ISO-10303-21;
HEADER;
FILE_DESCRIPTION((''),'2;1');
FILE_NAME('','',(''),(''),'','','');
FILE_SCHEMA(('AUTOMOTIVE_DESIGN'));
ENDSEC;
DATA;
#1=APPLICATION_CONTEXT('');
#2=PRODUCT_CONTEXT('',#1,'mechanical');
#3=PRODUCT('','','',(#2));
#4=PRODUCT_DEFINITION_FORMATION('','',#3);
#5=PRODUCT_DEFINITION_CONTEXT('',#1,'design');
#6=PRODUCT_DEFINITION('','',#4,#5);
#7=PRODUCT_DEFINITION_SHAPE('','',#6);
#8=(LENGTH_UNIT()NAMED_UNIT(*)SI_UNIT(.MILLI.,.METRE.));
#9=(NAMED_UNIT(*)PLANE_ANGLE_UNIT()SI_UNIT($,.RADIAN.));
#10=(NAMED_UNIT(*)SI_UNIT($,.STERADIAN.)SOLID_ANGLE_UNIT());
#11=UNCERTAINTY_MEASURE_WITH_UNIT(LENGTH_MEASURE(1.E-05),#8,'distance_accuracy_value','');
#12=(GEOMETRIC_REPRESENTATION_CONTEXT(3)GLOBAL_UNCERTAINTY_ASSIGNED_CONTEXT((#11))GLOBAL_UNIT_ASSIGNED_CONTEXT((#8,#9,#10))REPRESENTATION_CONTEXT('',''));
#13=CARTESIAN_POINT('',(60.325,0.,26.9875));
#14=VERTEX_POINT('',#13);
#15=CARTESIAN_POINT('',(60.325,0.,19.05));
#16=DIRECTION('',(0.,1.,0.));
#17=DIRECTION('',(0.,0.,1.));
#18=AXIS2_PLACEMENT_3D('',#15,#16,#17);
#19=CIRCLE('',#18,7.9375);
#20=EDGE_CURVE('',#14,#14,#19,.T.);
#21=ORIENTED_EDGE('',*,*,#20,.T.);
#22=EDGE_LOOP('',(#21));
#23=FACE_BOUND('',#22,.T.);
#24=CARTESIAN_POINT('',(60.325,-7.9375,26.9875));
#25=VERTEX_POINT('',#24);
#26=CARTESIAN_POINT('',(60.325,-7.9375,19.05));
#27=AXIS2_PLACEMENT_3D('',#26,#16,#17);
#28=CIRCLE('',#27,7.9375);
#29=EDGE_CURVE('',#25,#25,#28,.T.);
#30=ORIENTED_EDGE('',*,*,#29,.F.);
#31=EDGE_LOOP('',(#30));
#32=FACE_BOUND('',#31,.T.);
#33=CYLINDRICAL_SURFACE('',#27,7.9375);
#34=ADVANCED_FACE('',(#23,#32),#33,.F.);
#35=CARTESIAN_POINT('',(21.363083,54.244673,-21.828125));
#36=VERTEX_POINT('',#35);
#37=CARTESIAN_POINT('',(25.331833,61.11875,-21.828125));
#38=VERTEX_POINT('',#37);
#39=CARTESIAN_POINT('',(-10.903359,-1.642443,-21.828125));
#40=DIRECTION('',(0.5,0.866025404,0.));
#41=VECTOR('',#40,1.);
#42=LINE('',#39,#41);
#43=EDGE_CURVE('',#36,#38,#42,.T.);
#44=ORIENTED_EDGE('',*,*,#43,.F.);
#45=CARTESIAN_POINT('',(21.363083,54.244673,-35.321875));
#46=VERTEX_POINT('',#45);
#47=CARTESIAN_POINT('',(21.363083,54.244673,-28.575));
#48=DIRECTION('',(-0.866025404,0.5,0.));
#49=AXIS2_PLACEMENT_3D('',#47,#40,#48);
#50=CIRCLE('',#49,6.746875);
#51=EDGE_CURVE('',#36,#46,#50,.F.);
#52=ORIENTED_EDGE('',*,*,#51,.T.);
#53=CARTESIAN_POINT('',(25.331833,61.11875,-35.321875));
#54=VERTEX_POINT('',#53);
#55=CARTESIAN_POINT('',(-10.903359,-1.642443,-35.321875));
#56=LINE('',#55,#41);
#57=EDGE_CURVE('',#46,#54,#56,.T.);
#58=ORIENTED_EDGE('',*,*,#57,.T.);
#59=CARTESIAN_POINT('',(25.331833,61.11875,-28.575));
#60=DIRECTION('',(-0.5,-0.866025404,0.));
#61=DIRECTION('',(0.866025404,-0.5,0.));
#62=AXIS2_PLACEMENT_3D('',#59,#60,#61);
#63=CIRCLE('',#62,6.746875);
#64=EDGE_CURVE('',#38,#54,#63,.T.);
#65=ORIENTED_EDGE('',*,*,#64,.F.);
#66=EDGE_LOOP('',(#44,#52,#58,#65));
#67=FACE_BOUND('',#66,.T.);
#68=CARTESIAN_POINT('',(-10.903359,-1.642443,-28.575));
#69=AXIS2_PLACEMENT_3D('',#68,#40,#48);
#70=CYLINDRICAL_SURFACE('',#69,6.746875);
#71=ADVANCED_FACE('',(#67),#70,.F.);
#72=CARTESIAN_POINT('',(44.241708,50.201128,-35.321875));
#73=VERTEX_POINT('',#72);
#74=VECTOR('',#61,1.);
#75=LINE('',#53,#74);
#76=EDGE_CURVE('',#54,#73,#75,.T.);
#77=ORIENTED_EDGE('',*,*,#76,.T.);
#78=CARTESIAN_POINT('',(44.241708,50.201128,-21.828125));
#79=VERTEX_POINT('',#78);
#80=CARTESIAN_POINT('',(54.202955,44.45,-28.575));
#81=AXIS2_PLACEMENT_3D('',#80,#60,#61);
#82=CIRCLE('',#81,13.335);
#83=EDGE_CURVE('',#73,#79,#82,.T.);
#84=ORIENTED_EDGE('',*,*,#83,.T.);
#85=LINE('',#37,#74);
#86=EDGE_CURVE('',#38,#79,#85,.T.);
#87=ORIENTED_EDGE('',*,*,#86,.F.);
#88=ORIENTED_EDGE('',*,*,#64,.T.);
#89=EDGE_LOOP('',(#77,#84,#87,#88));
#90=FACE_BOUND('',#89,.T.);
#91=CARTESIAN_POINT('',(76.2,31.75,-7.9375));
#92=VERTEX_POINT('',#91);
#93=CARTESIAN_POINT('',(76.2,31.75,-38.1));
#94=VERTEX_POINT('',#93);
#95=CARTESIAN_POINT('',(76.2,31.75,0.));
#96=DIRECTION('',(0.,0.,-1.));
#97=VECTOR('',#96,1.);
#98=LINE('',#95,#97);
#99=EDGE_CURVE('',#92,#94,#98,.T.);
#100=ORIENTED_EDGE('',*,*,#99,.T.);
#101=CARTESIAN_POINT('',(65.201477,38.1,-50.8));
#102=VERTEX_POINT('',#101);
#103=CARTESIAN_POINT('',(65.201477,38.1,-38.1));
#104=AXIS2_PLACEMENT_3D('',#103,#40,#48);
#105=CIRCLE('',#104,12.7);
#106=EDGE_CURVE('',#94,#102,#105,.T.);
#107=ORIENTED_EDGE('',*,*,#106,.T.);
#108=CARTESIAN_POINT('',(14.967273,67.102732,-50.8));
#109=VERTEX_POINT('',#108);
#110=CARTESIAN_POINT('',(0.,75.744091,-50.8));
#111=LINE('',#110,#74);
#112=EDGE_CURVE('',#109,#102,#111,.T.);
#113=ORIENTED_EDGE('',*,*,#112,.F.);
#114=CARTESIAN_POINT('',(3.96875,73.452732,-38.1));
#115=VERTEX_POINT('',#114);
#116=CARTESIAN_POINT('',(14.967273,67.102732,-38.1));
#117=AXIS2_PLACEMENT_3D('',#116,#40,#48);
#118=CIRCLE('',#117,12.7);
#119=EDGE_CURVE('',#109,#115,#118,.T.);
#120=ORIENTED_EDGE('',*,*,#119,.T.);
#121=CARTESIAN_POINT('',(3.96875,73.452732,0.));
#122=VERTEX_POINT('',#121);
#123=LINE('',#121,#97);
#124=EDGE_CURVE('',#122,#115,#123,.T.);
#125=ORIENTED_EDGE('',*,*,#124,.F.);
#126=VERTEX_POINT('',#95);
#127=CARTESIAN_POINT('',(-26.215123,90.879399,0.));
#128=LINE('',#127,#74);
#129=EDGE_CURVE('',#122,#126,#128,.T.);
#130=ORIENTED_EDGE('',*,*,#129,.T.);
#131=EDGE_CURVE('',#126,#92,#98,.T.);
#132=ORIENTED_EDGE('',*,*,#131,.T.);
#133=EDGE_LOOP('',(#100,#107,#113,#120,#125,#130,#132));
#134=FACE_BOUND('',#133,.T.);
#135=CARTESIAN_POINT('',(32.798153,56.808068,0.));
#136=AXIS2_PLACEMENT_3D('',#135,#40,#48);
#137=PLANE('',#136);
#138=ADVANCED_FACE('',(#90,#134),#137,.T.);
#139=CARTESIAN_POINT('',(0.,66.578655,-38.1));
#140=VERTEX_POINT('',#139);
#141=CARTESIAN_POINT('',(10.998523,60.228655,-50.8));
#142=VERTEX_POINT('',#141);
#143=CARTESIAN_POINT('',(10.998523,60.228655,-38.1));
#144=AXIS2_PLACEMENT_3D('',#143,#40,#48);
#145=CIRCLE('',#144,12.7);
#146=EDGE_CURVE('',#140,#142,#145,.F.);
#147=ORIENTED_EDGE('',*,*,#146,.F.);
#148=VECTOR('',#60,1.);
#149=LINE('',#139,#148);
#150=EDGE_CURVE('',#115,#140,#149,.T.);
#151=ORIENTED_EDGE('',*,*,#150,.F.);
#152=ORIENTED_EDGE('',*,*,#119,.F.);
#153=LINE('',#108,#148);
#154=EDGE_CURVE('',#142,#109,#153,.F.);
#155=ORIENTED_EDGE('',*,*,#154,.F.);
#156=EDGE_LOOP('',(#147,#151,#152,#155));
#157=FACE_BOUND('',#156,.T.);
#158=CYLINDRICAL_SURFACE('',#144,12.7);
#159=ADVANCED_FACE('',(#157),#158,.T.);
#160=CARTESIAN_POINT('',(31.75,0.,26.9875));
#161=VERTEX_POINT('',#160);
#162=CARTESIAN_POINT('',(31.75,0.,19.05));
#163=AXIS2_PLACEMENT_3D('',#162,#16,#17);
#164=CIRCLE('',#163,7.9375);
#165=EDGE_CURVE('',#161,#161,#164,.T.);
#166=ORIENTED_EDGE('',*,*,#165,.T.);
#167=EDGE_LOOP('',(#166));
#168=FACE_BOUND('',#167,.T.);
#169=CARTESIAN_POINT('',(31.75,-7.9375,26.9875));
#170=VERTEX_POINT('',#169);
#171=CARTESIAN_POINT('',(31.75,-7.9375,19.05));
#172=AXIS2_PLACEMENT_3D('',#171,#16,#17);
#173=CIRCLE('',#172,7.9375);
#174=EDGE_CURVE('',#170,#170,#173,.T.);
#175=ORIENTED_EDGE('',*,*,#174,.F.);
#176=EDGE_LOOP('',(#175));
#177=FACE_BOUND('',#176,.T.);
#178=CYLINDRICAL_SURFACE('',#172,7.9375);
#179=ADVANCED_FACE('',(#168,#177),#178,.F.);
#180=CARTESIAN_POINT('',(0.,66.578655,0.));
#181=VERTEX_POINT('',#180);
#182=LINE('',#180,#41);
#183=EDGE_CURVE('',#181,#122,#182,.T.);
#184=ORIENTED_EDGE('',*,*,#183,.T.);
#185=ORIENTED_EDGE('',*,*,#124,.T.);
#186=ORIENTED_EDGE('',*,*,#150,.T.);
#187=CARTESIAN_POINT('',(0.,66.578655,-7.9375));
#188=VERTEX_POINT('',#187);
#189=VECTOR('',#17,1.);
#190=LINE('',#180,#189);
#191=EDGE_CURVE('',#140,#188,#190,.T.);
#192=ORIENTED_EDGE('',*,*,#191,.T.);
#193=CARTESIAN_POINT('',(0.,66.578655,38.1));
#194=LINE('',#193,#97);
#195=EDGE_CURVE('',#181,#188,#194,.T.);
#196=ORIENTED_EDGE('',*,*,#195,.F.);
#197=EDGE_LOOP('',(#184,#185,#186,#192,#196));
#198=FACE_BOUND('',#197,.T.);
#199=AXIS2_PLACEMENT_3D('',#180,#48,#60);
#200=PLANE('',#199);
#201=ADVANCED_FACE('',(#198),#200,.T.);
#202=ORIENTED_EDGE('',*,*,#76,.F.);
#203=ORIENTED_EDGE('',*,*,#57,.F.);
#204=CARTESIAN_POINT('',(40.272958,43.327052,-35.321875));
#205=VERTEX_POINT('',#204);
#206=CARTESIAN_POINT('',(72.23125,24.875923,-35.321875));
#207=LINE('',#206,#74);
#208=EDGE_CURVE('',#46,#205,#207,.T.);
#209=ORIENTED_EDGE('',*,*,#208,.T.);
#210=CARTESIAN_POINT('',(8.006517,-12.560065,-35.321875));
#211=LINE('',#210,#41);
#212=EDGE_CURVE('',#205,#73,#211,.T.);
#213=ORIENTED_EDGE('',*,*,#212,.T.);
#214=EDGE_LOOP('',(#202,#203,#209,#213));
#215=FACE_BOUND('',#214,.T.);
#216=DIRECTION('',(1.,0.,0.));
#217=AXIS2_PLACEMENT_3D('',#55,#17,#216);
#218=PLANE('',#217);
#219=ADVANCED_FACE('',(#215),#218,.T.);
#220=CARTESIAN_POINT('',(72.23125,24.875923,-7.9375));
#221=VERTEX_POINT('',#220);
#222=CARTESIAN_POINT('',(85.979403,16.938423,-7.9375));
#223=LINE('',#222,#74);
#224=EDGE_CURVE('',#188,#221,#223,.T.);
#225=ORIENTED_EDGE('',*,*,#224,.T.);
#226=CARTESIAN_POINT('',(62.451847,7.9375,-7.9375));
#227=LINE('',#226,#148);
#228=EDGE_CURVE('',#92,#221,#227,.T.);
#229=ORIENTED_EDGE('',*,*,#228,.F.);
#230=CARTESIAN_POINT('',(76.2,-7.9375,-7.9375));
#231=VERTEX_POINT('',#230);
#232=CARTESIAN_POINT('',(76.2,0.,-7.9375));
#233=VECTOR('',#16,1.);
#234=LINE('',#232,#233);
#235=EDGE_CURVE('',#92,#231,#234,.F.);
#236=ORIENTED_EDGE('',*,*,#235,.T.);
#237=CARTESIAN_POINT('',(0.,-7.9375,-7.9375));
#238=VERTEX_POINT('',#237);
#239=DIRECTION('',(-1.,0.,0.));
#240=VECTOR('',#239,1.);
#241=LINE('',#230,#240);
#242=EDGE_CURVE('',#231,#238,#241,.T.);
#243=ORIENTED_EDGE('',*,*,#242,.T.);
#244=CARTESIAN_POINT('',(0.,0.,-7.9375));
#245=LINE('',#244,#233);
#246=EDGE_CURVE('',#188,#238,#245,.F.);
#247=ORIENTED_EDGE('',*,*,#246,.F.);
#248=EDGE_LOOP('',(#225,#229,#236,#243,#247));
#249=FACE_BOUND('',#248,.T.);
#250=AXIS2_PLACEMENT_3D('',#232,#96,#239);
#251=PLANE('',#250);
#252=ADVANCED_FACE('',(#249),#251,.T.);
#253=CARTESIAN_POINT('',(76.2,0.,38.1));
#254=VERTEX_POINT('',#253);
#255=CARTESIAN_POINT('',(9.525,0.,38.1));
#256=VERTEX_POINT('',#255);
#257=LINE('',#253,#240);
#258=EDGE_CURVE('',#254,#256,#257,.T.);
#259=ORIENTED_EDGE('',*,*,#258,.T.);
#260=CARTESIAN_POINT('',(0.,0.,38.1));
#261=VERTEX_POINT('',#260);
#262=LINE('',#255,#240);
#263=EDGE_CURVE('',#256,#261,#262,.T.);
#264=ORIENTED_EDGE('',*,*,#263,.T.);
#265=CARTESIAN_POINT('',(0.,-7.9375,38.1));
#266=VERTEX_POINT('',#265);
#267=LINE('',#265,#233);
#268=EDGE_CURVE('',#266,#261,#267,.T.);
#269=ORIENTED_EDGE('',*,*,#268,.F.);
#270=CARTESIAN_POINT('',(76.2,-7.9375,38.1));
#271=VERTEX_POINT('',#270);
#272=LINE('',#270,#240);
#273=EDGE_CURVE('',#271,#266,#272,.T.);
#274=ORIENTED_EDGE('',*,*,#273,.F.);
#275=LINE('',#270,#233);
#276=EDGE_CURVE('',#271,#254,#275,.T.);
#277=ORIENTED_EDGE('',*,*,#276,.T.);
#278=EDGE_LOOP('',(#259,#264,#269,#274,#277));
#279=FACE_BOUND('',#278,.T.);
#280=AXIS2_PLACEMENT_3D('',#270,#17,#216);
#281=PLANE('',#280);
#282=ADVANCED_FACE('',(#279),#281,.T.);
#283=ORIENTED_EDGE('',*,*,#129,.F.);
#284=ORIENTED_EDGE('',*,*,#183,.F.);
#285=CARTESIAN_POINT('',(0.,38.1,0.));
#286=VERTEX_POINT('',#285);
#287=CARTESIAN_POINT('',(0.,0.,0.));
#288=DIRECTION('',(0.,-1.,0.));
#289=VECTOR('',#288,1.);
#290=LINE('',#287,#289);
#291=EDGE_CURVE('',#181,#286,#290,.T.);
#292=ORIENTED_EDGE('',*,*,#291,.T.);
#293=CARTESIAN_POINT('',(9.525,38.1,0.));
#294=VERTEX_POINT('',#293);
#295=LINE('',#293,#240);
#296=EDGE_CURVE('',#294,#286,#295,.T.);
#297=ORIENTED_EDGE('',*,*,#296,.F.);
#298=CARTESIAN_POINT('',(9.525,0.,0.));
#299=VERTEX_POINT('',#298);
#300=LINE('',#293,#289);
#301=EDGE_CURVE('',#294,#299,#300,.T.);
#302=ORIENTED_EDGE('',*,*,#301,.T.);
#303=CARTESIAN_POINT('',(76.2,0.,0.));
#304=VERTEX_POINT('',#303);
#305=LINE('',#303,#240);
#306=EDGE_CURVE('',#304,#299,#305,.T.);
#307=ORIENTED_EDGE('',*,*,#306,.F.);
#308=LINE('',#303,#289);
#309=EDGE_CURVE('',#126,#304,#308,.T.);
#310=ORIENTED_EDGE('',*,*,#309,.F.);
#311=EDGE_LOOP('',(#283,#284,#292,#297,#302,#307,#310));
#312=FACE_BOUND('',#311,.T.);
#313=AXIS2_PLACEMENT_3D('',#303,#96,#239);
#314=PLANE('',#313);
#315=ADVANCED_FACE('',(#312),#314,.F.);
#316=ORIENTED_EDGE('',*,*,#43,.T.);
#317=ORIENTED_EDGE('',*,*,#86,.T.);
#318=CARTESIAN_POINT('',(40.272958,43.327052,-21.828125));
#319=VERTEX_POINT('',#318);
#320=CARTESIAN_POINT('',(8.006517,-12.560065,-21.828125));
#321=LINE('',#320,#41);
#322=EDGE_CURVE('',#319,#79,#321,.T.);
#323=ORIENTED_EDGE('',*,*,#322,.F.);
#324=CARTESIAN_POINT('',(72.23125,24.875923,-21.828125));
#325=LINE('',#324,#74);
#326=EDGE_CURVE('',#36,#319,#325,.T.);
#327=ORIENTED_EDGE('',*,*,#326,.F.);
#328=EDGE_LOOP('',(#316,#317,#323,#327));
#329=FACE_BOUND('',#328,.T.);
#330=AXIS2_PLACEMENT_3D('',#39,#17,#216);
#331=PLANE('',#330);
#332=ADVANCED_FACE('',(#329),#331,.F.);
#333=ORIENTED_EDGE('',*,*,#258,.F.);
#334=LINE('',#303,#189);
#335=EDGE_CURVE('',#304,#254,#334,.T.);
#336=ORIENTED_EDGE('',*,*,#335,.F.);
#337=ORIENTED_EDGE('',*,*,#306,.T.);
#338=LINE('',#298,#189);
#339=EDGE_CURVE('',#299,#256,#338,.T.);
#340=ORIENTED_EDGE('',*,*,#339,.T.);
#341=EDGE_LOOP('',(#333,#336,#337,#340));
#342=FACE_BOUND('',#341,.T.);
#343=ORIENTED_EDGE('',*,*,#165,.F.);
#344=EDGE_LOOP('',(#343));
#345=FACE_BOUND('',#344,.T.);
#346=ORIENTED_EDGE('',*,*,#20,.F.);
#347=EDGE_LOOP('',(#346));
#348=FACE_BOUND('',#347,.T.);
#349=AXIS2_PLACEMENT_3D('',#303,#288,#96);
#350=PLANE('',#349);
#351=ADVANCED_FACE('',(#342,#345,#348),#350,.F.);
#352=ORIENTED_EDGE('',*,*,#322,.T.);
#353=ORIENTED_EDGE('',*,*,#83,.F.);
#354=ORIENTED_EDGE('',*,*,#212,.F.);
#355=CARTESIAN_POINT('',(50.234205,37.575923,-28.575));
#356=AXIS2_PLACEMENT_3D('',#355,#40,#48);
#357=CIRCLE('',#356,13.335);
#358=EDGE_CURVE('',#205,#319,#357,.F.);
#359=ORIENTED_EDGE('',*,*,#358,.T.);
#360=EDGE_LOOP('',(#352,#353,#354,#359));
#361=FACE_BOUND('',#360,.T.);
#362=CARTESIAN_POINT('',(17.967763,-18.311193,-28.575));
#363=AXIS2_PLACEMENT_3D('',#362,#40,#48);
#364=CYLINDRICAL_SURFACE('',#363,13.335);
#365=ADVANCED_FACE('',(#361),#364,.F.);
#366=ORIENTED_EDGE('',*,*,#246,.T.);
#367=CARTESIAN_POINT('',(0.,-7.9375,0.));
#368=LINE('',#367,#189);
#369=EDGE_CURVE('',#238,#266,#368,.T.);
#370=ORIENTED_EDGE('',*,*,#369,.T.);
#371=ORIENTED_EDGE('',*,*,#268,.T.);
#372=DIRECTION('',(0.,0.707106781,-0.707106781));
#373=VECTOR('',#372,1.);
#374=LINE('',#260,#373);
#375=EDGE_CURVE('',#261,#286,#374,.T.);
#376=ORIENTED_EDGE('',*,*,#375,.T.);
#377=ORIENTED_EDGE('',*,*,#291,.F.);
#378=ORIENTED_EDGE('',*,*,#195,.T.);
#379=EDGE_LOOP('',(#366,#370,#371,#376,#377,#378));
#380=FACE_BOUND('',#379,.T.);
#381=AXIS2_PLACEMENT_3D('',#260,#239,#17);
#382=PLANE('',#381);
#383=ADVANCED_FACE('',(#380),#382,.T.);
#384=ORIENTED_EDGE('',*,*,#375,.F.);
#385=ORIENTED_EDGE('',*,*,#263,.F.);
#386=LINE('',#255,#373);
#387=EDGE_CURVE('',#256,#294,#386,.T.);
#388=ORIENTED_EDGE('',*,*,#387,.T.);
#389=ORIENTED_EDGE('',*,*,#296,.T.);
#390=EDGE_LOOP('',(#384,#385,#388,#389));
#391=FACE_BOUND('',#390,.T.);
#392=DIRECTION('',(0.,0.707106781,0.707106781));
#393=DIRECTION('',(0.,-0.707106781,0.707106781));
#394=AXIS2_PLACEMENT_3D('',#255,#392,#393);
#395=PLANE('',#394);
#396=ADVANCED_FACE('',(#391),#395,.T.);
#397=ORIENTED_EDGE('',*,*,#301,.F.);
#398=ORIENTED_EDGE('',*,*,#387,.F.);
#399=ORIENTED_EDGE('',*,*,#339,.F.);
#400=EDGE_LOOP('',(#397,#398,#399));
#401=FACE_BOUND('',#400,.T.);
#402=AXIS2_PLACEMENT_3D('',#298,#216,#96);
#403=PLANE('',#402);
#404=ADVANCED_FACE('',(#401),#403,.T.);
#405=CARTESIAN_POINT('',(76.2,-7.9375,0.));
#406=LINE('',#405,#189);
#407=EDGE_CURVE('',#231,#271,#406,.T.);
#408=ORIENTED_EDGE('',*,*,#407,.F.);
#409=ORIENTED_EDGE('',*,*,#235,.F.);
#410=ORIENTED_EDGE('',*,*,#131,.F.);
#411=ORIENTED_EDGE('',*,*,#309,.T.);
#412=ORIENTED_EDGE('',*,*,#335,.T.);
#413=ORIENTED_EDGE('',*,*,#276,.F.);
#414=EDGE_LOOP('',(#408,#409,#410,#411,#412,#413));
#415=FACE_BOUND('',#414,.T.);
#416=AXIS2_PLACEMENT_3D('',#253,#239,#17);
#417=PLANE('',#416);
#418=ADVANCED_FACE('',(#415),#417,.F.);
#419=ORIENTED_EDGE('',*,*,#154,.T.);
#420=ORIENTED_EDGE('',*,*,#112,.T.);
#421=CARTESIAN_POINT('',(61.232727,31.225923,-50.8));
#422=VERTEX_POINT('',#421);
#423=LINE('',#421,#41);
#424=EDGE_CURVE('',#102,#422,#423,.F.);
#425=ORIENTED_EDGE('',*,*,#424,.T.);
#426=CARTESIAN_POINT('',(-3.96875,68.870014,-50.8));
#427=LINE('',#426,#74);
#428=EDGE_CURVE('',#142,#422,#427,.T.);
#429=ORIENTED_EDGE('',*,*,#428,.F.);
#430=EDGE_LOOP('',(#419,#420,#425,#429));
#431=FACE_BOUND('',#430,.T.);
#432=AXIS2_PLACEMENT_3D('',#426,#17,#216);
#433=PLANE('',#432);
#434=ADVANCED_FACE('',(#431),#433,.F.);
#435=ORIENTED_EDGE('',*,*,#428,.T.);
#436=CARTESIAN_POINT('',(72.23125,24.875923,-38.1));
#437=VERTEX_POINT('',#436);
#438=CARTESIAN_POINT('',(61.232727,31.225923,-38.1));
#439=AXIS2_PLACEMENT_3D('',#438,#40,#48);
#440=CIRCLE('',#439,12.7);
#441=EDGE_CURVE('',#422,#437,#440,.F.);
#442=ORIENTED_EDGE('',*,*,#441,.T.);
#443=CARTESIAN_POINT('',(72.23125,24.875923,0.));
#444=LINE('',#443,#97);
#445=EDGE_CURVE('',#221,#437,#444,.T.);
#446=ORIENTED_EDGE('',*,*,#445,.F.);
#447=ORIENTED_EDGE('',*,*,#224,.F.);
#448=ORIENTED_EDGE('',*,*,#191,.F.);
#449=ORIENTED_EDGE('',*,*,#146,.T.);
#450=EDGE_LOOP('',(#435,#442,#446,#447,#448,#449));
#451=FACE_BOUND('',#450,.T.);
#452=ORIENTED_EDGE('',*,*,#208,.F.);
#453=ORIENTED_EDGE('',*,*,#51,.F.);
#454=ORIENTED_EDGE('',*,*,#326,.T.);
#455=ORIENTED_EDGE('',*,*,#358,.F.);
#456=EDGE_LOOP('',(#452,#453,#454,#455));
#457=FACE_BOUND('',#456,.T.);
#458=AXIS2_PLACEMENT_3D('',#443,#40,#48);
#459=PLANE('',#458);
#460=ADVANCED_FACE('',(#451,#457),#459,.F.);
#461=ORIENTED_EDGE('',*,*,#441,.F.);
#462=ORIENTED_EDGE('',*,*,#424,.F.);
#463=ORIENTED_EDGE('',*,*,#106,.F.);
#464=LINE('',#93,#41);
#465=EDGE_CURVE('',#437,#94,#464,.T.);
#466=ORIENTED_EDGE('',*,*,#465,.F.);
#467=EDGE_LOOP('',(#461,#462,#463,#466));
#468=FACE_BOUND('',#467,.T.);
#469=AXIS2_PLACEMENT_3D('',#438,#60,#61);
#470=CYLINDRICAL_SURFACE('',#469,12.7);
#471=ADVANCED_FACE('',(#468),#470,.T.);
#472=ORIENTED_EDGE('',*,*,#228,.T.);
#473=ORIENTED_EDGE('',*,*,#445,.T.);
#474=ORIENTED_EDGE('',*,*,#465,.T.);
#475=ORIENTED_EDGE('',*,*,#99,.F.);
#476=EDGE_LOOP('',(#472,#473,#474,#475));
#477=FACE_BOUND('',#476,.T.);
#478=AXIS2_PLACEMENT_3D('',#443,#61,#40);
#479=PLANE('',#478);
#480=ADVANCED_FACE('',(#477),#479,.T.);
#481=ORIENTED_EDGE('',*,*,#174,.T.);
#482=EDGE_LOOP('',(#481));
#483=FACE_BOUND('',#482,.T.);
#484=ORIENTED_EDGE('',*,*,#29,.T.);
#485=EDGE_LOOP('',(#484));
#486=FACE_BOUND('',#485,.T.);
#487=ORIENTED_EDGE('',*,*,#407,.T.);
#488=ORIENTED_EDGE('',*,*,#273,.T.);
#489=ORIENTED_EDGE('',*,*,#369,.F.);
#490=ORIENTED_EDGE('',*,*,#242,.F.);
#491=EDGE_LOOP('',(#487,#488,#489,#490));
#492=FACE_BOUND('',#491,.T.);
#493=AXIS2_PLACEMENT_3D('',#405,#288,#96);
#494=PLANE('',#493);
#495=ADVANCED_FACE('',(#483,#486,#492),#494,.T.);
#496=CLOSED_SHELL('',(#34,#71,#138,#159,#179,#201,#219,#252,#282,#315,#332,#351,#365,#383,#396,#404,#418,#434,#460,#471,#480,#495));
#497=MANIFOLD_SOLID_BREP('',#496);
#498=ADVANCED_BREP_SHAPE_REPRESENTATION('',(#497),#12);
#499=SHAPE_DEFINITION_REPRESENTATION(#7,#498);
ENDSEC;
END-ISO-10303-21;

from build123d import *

# Parameters (mm, degrees)
BASE_EXTRUDE_THIN_DEPTH = 76.2
BOSS_EXTRUDE1_START     = -7.9375
BOSS_EXTRUDE1_DEPTH     = 7.9375
SKETCH3_W               = 87.988181024
SKETCH3_H               = 50.8
BOSS_EXTRUDE2_DEPTH     = 7.9375
CUT_EXTRUDE1_DEPTH      = 119.845476344
FILLET1_R               = 12.7
BOSS_EXTRUDE3_DEPTH     = 9.525
CUT_EXTRUDE2_DEPTH      = 100.992371073
SKETCH9_R               = 7.9375
CUT_EXTRUDE3_DEPTH      = 118.398397707
LPATTERN2_COUNT         = 2
LPATTERN2_PITCH         = 28.575


# Read off the part's stored shape, not the designer's step: Boss-Extrude1
with BuildPart() as part:
    # Sketch1 → Base-Extrude-Thin (new body)
    with BuildSketch(Plane(origin=(0, 0, 0), x_dir=(0, 0, -1), z_dir=(1, 0, 0))):
        Polygon((-38.1, 0), (0, 0), (0, 31.75), (7.9375, 31.75), (7.9375, -7.9375), (-38.1, -7.9375), align=None)
    extrude(amount=BASE_EXTRUDE_THIN_DEPTH)

    # Boss-Extrude1 outline → Boss-Extrude1 (add)
    with BuildSketch(Plane.XY.offset(BOSS_EXTRUDE1_START)):
        Polygon((76.2, 31.75), (0, 75.744090512), (0, 31.75), align=None)
    extrude(amount=BOSS_EXTRUDE1_DEPTH)

    # Sketch3 → Boss-Extrude2 (add)
    with BuildSketch(Plane(origin=(32.798153285, 56.808067884, 0), x_dir=(-0.8660254037844379, 0.5000000000000014, 0), z_dir=(0.5000000000000014, 0.8660254037844379, 0))):
        with Locations((-6.122045256, -25.4)):
            Rectangle(SKETCH3_W, SKETCH3_H)
    extrude(amount=-BOSS_EXTRUDE2_DEPTH)

    # Sketch4 → Cut-Extrude1 (cut, through all)
    with BuildSketch(Plane.XY):
        Polygon((-113.819682418, -130.562817861), (0, 66.578654989), (3.96875, 73.452731631), (117.788432418, 270.594204481), (-276.494513281, 498.233569317), (-508.102628117, 97.076546976), align=None)
    extrude(amount=-CUT_EXTRUDE1_DEPTH, mode=Mode.SUBTRACT)

    # Fillet1
    fillet1_edges = [part.edges().sort_by_distance(p)[0] for p in [
        (74.215625, 28.312961679, -50.8),
        (1.984375, 70.01569331, -50.8),
    ]]
    fillet(fillet1_edges, radius=FILLET1_R)

    # Sketch5 → Boss-Extrude3 (add)
    with BuildSketch(Plane.ZY):
        Polygon((0, 38.1), (0, 0), (38.1, 0), align=None)
    extrude(amount=-BOSS_EXTRUDE3_DEPTH)

    # Sketch6 → Cut-Extrude2 (cut, through all)
    with BuildSketch(Plane(origin=(24.654916237, 61.509567986, -0.61351416), x_dir=(-0.866025403784438, 0.5000000000000012, 0), z_dir=(0.5000000000000011, 0.8660254037844379, 0))):
        with BuildLine():
            Line((-0.781635971, -34.70836084), (-22.616879552, -34.70836084))
            ThreePointArc((-22.616879552, -34.70836084), (-47.454135971, -27.96148584), (-22.616879552, -21.21461084))
            Line((-22.616879552, -21.21461084), (-0.781635971, -21.21461084))
            ThreePointArc((-0.781635971, -21.21461084), (5.965239029, -27.96148584), (-0.781635971, -34.70836084))
        make_face()
    extrude(amount=-CUT_EXTRUDE2_DEPTH, mode=Mode.SUBTRACT)

    # Sketch9 → Cut-Extrude3 (cut, through all)
    with BuildSketch(Plane(origin=(0, 0, 0), x_dir=(-1, 0, 0), z_dir=(0, 1, 0))):
        with Locations(Location((-60.325, 19.05, 0), (0, 0, 90))):
            Circle(SKETCH9_R)
    cut_extrude3 = extrude(amount=-CUT_EXTRUDE3_DEPTH, mode=Mode.SUBTRACT)

    # LPattern2: Cut-Extrude3 ×2
    with Locations(*[(-i * LPATTERN2_PITCH, 0, 0) for i in range(1, LPATTERN2_COUNT)]):
        add(cut_extrude3, mode=Mode.SUBTRACT)


solid = part.part
